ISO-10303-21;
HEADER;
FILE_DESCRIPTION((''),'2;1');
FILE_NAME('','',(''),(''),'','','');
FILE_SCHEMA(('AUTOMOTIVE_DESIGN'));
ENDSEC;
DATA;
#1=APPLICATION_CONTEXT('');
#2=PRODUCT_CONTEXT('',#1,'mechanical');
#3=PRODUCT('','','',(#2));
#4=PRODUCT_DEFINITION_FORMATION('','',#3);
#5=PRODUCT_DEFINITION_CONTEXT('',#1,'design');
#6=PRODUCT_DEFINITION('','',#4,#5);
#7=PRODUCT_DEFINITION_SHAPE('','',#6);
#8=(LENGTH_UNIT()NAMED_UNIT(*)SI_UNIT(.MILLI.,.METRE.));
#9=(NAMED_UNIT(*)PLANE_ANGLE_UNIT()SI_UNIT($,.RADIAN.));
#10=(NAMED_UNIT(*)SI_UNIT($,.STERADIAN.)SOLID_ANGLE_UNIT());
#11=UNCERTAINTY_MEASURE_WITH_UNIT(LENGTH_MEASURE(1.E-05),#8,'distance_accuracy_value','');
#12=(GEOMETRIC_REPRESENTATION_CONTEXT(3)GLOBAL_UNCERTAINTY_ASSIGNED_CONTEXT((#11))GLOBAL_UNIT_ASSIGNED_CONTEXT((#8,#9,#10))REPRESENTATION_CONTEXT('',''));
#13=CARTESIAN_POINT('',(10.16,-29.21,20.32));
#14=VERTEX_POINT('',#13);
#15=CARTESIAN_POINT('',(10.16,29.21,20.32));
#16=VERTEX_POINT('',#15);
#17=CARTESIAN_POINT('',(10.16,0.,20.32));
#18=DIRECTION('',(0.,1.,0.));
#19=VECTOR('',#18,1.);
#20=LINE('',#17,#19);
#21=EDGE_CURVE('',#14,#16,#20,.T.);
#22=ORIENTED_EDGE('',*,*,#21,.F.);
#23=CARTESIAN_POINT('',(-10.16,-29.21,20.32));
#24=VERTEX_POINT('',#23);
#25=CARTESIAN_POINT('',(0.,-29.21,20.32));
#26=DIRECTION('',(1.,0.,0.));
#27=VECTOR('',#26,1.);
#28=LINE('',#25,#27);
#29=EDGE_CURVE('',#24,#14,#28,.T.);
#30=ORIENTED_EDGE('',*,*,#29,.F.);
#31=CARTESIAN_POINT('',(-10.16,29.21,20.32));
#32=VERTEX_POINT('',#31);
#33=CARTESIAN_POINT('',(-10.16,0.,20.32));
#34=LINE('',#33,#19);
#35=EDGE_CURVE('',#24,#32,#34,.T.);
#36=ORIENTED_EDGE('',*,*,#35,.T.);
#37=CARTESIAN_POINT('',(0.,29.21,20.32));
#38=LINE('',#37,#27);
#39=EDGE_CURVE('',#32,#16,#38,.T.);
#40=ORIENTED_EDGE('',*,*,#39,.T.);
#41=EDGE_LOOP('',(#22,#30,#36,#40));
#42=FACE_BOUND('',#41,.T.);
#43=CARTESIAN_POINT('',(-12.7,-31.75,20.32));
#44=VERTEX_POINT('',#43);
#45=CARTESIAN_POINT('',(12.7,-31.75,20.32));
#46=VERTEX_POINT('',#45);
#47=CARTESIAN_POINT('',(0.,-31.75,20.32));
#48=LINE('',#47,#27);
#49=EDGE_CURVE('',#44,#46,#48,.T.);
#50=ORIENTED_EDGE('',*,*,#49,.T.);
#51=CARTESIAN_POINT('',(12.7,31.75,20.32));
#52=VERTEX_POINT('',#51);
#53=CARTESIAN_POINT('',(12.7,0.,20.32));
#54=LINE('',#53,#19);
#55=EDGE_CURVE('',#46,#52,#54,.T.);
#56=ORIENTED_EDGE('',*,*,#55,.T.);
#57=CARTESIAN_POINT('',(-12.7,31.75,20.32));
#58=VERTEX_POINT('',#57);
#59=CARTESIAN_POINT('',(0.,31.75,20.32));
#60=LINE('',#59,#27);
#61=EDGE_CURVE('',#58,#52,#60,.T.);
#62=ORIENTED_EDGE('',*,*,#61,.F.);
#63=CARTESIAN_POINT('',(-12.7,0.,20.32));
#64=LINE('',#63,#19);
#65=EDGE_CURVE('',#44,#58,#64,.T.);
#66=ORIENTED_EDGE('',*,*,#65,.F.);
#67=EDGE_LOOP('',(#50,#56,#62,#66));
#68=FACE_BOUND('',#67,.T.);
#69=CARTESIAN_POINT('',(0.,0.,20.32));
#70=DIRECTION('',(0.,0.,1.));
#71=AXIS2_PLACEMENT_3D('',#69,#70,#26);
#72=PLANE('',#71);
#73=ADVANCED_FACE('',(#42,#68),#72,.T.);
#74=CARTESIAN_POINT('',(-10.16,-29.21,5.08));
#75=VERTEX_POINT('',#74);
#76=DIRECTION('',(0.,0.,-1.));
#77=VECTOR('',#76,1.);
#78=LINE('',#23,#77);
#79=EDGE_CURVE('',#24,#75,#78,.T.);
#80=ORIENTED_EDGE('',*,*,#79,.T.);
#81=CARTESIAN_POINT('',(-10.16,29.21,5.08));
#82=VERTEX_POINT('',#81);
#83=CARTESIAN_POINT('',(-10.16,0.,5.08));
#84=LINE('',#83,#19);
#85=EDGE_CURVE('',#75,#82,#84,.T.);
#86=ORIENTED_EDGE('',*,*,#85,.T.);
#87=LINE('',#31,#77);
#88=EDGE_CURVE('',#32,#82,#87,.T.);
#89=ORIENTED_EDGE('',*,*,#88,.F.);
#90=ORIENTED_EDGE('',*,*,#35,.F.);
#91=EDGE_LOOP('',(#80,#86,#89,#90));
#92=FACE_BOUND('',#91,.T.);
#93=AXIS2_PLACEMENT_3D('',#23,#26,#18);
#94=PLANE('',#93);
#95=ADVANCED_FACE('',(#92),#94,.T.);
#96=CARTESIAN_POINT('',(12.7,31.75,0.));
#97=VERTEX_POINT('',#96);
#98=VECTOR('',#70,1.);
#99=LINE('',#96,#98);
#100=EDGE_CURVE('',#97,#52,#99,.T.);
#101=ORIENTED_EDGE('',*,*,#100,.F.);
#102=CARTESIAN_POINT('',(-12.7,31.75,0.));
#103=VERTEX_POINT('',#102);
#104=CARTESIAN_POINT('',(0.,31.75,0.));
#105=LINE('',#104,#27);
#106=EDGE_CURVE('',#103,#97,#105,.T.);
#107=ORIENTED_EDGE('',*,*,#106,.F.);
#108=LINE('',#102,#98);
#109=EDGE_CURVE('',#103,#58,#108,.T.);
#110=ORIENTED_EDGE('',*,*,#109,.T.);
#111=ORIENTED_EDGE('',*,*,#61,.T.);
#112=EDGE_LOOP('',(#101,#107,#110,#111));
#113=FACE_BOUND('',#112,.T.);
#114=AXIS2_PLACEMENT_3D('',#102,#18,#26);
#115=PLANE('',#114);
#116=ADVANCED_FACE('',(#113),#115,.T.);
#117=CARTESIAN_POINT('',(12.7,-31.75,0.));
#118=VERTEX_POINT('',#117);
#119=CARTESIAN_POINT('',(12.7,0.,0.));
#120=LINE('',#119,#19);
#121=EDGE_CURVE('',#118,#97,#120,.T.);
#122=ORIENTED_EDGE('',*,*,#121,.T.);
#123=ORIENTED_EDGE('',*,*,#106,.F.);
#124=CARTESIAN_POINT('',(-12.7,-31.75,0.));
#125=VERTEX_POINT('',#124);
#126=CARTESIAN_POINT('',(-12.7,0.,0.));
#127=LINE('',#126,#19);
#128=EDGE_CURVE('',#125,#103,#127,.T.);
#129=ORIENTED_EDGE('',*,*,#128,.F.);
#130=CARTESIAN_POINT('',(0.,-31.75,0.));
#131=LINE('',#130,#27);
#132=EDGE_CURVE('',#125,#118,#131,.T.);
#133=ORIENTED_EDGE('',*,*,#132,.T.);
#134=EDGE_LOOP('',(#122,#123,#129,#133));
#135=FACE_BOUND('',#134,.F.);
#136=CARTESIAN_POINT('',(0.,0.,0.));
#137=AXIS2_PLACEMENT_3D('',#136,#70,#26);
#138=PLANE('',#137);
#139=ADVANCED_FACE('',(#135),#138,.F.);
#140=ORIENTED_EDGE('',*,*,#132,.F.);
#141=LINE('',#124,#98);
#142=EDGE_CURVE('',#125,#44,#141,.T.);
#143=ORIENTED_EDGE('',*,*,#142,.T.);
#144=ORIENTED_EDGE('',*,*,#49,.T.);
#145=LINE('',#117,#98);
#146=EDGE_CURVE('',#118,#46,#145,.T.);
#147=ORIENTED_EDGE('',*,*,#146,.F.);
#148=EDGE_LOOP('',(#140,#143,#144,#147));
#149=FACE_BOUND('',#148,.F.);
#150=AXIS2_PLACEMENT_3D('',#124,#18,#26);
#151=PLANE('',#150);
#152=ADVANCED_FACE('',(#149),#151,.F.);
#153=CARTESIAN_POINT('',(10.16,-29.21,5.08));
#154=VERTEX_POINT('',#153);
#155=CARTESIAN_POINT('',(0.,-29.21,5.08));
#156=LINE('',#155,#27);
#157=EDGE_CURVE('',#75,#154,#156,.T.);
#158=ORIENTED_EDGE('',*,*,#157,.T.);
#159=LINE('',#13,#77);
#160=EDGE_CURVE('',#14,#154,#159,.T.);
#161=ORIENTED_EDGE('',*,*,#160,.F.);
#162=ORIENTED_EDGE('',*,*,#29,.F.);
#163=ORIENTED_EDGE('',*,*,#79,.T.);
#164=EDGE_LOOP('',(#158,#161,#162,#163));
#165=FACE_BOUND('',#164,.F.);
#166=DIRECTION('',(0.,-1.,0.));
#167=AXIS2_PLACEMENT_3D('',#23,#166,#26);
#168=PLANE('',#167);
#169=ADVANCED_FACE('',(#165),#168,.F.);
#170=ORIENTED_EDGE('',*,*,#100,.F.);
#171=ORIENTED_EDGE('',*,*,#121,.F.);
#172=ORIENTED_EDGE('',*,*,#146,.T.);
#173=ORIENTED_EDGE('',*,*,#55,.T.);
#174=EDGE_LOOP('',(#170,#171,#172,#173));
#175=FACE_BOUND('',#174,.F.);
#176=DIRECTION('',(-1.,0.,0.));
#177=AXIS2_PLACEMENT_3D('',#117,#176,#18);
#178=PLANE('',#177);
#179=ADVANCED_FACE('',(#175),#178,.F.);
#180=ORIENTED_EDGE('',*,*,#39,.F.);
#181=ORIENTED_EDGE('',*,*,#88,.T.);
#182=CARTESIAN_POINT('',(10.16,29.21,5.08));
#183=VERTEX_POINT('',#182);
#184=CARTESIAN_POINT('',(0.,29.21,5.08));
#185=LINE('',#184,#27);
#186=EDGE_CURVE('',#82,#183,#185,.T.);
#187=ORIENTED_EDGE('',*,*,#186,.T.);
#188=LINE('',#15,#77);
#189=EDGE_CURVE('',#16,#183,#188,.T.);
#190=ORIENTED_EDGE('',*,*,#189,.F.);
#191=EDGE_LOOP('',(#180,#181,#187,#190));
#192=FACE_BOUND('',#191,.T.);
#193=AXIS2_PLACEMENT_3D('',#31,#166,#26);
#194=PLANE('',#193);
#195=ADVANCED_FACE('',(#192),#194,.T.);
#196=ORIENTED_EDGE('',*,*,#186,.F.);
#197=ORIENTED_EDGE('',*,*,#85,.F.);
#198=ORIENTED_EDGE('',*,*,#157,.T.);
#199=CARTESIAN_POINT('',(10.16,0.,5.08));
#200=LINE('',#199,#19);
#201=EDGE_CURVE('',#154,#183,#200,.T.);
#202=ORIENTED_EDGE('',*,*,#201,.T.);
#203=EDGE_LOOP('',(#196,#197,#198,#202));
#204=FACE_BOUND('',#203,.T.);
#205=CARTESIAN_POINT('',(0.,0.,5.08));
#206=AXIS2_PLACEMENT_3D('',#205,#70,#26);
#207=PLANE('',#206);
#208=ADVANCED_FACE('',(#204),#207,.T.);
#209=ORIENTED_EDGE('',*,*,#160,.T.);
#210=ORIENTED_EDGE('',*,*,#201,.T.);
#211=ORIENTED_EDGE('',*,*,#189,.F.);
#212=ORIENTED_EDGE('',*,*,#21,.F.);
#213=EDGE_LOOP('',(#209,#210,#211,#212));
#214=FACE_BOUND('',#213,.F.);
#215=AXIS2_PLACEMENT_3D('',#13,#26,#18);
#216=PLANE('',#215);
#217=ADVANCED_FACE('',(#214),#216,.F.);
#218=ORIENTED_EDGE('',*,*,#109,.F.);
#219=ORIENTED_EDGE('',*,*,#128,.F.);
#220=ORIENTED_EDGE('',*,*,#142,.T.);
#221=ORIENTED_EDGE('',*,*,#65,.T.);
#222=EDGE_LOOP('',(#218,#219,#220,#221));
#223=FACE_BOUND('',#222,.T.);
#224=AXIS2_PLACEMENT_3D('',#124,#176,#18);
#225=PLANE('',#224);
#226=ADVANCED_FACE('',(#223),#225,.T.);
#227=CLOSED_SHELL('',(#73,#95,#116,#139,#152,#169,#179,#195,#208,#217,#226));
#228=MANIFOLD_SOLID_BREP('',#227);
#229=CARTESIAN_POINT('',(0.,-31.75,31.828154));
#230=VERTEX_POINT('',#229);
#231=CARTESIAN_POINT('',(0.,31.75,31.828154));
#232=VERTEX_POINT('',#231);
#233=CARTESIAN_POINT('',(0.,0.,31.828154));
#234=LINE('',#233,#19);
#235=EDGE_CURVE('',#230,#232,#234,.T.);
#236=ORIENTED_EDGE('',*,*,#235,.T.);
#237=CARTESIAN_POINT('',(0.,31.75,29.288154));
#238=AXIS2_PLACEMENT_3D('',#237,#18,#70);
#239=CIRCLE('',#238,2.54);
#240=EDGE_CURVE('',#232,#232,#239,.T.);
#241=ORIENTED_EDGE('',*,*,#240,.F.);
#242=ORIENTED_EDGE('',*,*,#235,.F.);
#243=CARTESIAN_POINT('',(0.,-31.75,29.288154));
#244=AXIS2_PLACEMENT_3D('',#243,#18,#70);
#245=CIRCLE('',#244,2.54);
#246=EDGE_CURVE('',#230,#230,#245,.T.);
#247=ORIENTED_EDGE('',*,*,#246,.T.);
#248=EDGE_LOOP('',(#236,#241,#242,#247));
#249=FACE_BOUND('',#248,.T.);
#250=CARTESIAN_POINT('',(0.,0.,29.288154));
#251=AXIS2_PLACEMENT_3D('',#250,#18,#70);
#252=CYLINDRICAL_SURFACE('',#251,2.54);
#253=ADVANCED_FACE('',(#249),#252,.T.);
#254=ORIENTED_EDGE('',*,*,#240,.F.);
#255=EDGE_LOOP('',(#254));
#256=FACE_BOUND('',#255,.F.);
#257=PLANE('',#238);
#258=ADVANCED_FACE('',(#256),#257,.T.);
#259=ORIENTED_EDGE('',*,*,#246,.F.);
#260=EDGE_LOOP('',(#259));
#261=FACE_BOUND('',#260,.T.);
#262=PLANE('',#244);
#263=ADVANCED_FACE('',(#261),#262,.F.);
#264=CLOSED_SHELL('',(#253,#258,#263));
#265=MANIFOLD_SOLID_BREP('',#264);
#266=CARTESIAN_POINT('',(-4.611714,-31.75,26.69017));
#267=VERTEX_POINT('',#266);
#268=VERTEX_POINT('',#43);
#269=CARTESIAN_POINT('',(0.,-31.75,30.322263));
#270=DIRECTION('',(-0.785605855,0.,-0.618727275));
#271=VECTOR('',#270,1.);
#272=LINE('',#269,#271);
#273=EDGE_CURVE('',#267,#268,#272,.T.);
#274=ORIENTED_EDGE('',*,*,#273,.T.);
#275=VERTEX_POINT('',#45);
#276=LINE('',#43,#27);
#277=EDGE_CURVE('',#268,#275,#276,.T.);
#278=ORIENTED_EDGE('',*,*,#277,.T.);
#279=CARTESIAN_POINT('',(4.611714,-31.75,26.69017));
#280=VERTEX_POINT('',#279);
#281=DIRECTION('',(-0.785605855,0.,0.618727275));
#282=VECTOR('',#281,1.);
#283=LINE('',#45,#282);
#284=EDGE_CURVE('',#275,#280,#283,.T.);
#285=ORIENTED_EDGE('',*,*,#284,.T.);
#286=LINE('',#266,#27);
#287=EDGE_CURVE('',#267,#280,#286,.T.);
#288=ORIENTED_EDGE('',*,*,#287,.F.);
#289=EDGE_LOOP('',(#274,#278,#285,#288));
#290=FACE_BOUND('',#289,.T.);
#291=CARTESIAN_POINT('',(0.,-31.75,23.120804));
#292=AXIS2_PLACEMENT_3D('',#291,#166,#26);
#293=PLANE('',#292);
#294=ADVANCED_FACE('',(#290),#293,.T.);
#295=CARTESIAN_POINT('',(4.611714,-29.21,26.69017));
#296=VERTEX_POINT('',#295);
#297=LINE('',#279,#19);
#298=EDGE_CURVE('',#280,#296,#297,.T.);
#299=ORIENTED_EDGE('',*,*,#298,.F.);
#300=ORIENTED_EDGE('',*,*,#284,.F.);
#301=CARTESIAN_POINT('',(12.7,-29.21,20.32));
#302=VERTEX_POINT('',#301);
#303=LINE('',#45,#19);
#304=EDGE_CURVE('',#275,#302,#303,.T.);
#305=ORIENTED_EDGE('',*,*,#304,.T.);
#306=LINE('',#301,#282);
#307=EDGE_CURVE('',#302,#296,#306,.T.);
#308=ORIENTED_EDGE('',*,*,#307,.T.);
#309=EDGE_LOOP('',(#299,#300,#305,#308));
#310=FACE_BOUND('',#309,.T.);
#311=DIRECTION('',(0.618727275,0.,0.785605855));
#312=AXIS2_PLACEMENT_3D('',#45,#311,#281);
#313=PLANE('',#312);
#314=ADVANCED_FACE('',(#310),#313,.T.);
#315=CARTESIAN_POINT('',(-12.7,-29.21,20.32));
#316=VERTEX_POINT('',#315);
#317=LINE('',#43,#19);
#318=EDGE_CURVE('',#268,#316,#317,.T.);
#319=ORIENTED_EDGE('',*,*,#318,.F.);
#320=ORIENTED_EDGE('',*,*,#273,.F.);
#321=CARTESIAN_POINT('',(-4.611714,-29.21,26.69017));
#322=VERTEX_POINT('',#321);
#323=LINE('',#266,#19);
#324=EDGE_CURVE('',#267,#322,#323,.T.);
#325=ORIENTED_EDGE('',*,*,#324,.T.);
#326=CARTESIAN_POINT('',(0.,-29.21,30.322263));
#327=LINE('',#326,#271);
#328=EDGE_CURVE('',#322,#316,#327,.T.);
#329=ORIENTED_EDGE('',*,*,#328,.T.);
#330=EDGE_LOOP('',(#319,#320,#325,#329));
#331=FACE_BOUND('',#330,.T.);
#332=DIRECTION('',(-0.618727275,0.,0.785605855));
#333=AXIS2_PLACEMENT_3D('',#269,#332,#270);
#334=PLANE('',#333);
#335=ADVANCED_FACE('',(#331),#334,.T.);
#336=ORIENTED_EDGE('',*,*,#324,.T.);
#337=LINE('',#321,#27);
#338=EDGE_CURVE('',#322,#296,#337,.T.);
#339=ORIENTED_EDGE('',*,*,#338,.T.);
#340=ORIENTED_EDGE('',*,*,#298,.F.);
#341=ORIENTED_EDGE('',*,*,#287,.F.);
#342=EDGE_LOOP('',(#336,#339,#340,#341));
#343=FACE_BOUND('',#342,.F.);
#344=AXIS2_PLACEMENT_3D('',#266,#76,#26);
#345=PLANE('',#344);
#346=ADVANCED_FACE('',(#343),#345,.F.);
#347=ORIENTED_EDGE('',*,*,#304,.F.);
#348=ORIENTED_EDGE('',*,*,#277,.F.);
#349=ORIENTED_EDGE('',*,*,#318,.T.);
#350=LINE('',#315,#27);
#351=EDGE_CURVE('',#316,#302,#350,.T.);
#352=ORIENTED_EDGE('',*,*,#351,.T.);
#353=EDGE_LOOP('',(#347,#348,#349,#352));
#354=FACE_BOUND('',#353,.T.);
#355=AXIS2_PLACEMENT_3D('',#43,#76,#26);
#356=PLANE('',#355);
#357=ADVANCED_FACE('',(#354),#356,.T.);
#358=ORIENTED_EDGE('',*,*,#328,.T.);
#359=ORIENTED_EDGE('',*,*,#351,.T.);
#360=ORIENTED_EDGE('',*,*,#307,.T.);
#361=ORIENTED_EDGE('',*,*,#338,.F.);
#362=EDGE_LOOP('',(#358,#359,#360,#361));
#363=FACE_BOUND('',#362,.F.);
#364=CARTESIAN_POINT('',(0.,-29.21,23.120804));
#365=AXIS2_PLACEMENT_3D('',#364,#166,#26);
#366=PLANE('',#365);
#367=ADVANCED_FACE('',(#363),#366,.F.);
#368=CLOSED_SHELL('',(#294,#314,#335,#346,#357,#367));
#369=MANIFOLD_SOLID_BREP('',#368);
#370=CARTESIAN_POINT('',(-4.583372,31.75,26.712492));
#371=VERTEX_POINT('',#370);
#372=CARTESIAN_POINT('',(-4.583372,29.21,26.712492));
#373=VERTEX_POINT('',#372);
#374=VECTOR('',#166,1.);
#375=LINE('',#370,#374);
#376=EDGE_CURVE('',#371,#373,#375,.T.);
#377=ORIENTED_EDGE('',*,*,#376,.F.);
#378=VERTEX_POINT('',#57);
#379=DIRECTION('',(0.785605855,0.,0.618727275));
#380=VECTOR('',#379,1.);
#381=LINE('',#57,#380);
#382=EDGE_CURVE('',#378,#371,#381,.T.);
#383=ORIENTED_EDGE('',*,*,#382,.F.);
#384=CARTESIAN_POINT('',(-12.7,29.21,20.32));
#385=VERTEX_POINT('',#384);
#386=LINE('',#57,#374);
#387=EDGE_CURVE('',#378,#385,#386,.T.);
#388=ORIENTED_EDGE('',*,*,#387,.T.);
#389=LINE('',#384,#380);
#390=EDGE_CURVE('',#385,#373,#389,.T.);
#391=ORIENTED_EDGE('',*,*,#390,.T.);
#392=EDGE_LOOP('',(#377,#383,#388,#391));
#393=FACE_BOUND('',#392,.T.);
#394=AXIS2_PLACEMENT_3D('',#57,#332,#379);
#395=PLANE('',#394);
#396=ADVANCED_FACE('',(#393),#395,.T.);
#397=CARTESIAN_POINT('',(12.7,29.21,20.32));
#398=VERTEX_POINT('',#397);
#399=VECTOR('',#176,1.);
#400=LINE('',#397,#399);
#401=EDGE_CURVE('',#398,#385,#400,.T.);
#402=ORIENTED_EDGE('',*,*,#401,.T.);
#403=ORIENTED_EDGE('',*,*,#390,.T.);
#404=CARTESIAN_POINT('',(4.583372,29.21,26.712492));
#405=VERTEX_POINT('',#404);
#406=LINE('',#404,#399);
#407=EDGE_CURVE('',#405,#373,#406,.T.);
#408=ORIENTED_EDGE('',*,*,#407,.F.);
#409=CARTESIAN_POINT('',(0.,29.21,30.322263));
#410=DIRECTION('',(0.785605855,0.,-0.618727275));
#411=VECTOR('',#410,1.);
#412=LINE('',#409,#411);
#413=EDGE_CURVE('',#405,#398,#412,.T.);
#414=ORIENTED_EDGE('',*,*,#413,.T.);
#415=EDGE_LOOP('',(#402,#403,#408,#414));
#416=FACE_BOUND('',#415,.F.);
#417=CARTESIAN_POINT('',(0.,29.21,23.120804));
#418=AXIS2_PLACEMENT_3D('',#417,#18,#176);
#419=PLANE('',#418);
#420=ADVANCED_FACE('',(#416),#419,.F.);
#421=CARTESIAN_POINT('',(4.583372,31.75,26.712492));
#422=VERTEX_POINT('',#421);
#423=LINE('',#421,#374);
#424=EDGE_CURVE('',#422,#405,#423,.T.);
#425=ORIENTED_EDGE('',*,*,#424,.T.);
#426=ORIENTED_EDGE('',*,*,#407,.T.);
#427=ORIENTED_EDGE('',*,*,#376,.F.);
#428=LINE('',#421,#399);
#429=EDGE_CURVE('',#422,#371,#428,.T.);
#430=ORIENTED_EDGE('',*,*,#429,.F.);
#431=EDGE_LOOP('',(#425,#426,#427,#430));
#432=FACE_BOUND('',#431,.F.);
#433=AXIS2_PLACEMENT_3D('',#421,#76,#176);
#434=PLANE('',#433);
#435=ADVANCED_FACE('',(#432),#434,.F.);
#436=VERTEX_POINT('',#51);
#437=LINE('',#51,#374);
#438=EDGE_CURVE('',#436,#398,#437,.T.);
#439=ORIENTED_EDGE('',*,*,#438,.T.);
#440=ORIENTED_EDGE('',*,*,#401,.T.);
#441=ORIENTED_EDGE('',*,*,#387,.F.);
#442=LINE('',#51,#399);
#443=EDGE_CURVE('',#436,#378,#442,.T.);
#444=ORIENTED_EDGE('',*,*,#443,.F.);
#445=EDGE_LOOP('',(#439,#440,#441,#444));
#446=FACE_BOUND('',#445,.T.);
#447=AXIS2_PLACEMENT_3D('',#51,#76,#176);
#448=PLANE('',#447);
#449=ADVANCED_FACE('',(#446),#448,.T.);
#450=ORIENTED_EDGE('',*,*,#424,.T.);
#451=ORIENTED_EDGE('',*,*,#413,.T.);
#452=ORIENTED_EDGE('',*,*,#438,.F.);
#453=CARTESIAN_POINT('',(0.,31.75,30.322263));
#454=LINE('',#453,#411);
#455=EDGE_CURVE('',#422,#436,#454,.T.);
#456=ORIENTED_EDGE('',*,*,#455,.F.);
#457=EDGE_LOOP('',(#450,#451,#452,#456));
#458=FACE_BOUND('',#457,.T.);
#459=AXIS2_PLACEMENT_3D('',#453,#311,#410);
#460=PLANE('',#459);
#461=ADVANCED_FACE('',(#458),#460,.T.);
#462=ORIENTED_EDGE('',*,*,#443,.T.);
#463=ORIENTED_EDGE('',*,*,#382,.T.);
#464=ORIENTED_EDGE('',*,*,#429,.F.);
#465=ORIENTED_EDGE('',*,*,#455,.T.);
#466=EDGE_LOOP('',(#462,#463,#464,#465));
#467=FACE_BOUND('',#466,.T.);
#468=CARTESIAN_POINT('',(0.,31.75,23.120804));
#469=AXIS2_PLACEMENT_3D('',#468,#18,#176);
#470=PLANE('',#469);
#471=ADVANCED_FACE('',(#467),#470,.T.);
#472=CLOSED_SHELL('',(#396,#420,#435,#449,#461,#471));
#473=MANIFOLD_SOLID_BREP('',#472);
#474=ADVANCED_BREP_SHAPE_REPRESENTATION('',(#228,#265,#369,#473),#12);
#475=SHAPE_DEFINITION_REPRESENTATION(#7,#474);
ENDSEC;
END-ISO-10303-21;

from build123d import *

# Parameters (mm, degrees)
F0_W      = 25.4
F0_H      = 63.5
F1_DEPTH  = 20.32
F2_W      = 20.32
F2_H      = 58.42
F3_DEPTH  = 15.24
F4_W      = 63.5
F4_H      = 2.54
F7_DEPTH  = 2.54
F9_DEPTH  = 2.54
F11_DEPTH = 2.54
F13_DEPTH = 2.54


with BuildPart() as f1:
    # F0 (on Top) → F1 (new body)
    with BuildSketch(Plane.XY):
        Rectangle(F0_W, F0_H)
    extrude(amount=F1_DEPTH)

    # F2 (on face) → F3 (cut)
    with BuildSketch(Plane.XY.offset(20.32)):
        Rectangle(F2_W, F2_H)
    extrude(amount=-F3_DEPTH, mode=Mode.SUBTRACT)


with BuildPart() as f5:
    # F4 (on Right) → F5 (revolve)
    with BuildSketch(Plane.YZ):
        with Locations((0, 30.5581537774)):
            Rectangle(F4_W, F4_H)
    revolve(axis=Axis((0, 0, 29.2881537774), (0, 1, 0)))


with BuildPart() as f7:
    # F6 (on face) → F7 (new body)
    with BuildSketch(Plane.XZ.offset(31.75)):
        Polygon((0, 30.3222630173), (-12.7, 20.32), (12.7, 20.32), align=None)
    extrude(amount=-F7_DEPTH)

    # F10 (on face) → F11 (cut)
    with BuildSketch(Plane.XZ.offset(31.75)):
        Polygon((-4.6117142786, 26.6901701689), (0, 26.6901701689), (4.6117142786, 26.6901701689), (0, 30.3222630173), align=None)
    extrude(amount=-F11_DEPTH, mode=Mode.SUBTRACT)


with BuildPart() as f9:
    # F8 (on face) → F9 (new body)
    with BuildSketch(Plane(origin=(0, 31.75, 0), x_dir=(-1, 0, 0), z_dir=(0, 1, 0))):
        Polygon((0, 30.3222630173), (-12.7, 20.32), (12.7, 20.32), align=None)
    extrude(amount=-F9_DEPTH)

    # F12 (on face) → F13 (cut)
    with BuildSketch(Plane(origin=(0, 31.75, 0), x_dir=(-1, 0, 0), z_dir=(0, 1, 0))):
        Polygon((-4.5833718294, 26.7124921083), (0, 26.7124921083), (4.5833718294, 26.7124921083), (0, 30.3222630173), align=None)
    extrude(amount=-F13_DEPTH, mode=Mode.SUBTRACT)


solid = Compound([f1.part, f5.part, f7.part, f9.part])
